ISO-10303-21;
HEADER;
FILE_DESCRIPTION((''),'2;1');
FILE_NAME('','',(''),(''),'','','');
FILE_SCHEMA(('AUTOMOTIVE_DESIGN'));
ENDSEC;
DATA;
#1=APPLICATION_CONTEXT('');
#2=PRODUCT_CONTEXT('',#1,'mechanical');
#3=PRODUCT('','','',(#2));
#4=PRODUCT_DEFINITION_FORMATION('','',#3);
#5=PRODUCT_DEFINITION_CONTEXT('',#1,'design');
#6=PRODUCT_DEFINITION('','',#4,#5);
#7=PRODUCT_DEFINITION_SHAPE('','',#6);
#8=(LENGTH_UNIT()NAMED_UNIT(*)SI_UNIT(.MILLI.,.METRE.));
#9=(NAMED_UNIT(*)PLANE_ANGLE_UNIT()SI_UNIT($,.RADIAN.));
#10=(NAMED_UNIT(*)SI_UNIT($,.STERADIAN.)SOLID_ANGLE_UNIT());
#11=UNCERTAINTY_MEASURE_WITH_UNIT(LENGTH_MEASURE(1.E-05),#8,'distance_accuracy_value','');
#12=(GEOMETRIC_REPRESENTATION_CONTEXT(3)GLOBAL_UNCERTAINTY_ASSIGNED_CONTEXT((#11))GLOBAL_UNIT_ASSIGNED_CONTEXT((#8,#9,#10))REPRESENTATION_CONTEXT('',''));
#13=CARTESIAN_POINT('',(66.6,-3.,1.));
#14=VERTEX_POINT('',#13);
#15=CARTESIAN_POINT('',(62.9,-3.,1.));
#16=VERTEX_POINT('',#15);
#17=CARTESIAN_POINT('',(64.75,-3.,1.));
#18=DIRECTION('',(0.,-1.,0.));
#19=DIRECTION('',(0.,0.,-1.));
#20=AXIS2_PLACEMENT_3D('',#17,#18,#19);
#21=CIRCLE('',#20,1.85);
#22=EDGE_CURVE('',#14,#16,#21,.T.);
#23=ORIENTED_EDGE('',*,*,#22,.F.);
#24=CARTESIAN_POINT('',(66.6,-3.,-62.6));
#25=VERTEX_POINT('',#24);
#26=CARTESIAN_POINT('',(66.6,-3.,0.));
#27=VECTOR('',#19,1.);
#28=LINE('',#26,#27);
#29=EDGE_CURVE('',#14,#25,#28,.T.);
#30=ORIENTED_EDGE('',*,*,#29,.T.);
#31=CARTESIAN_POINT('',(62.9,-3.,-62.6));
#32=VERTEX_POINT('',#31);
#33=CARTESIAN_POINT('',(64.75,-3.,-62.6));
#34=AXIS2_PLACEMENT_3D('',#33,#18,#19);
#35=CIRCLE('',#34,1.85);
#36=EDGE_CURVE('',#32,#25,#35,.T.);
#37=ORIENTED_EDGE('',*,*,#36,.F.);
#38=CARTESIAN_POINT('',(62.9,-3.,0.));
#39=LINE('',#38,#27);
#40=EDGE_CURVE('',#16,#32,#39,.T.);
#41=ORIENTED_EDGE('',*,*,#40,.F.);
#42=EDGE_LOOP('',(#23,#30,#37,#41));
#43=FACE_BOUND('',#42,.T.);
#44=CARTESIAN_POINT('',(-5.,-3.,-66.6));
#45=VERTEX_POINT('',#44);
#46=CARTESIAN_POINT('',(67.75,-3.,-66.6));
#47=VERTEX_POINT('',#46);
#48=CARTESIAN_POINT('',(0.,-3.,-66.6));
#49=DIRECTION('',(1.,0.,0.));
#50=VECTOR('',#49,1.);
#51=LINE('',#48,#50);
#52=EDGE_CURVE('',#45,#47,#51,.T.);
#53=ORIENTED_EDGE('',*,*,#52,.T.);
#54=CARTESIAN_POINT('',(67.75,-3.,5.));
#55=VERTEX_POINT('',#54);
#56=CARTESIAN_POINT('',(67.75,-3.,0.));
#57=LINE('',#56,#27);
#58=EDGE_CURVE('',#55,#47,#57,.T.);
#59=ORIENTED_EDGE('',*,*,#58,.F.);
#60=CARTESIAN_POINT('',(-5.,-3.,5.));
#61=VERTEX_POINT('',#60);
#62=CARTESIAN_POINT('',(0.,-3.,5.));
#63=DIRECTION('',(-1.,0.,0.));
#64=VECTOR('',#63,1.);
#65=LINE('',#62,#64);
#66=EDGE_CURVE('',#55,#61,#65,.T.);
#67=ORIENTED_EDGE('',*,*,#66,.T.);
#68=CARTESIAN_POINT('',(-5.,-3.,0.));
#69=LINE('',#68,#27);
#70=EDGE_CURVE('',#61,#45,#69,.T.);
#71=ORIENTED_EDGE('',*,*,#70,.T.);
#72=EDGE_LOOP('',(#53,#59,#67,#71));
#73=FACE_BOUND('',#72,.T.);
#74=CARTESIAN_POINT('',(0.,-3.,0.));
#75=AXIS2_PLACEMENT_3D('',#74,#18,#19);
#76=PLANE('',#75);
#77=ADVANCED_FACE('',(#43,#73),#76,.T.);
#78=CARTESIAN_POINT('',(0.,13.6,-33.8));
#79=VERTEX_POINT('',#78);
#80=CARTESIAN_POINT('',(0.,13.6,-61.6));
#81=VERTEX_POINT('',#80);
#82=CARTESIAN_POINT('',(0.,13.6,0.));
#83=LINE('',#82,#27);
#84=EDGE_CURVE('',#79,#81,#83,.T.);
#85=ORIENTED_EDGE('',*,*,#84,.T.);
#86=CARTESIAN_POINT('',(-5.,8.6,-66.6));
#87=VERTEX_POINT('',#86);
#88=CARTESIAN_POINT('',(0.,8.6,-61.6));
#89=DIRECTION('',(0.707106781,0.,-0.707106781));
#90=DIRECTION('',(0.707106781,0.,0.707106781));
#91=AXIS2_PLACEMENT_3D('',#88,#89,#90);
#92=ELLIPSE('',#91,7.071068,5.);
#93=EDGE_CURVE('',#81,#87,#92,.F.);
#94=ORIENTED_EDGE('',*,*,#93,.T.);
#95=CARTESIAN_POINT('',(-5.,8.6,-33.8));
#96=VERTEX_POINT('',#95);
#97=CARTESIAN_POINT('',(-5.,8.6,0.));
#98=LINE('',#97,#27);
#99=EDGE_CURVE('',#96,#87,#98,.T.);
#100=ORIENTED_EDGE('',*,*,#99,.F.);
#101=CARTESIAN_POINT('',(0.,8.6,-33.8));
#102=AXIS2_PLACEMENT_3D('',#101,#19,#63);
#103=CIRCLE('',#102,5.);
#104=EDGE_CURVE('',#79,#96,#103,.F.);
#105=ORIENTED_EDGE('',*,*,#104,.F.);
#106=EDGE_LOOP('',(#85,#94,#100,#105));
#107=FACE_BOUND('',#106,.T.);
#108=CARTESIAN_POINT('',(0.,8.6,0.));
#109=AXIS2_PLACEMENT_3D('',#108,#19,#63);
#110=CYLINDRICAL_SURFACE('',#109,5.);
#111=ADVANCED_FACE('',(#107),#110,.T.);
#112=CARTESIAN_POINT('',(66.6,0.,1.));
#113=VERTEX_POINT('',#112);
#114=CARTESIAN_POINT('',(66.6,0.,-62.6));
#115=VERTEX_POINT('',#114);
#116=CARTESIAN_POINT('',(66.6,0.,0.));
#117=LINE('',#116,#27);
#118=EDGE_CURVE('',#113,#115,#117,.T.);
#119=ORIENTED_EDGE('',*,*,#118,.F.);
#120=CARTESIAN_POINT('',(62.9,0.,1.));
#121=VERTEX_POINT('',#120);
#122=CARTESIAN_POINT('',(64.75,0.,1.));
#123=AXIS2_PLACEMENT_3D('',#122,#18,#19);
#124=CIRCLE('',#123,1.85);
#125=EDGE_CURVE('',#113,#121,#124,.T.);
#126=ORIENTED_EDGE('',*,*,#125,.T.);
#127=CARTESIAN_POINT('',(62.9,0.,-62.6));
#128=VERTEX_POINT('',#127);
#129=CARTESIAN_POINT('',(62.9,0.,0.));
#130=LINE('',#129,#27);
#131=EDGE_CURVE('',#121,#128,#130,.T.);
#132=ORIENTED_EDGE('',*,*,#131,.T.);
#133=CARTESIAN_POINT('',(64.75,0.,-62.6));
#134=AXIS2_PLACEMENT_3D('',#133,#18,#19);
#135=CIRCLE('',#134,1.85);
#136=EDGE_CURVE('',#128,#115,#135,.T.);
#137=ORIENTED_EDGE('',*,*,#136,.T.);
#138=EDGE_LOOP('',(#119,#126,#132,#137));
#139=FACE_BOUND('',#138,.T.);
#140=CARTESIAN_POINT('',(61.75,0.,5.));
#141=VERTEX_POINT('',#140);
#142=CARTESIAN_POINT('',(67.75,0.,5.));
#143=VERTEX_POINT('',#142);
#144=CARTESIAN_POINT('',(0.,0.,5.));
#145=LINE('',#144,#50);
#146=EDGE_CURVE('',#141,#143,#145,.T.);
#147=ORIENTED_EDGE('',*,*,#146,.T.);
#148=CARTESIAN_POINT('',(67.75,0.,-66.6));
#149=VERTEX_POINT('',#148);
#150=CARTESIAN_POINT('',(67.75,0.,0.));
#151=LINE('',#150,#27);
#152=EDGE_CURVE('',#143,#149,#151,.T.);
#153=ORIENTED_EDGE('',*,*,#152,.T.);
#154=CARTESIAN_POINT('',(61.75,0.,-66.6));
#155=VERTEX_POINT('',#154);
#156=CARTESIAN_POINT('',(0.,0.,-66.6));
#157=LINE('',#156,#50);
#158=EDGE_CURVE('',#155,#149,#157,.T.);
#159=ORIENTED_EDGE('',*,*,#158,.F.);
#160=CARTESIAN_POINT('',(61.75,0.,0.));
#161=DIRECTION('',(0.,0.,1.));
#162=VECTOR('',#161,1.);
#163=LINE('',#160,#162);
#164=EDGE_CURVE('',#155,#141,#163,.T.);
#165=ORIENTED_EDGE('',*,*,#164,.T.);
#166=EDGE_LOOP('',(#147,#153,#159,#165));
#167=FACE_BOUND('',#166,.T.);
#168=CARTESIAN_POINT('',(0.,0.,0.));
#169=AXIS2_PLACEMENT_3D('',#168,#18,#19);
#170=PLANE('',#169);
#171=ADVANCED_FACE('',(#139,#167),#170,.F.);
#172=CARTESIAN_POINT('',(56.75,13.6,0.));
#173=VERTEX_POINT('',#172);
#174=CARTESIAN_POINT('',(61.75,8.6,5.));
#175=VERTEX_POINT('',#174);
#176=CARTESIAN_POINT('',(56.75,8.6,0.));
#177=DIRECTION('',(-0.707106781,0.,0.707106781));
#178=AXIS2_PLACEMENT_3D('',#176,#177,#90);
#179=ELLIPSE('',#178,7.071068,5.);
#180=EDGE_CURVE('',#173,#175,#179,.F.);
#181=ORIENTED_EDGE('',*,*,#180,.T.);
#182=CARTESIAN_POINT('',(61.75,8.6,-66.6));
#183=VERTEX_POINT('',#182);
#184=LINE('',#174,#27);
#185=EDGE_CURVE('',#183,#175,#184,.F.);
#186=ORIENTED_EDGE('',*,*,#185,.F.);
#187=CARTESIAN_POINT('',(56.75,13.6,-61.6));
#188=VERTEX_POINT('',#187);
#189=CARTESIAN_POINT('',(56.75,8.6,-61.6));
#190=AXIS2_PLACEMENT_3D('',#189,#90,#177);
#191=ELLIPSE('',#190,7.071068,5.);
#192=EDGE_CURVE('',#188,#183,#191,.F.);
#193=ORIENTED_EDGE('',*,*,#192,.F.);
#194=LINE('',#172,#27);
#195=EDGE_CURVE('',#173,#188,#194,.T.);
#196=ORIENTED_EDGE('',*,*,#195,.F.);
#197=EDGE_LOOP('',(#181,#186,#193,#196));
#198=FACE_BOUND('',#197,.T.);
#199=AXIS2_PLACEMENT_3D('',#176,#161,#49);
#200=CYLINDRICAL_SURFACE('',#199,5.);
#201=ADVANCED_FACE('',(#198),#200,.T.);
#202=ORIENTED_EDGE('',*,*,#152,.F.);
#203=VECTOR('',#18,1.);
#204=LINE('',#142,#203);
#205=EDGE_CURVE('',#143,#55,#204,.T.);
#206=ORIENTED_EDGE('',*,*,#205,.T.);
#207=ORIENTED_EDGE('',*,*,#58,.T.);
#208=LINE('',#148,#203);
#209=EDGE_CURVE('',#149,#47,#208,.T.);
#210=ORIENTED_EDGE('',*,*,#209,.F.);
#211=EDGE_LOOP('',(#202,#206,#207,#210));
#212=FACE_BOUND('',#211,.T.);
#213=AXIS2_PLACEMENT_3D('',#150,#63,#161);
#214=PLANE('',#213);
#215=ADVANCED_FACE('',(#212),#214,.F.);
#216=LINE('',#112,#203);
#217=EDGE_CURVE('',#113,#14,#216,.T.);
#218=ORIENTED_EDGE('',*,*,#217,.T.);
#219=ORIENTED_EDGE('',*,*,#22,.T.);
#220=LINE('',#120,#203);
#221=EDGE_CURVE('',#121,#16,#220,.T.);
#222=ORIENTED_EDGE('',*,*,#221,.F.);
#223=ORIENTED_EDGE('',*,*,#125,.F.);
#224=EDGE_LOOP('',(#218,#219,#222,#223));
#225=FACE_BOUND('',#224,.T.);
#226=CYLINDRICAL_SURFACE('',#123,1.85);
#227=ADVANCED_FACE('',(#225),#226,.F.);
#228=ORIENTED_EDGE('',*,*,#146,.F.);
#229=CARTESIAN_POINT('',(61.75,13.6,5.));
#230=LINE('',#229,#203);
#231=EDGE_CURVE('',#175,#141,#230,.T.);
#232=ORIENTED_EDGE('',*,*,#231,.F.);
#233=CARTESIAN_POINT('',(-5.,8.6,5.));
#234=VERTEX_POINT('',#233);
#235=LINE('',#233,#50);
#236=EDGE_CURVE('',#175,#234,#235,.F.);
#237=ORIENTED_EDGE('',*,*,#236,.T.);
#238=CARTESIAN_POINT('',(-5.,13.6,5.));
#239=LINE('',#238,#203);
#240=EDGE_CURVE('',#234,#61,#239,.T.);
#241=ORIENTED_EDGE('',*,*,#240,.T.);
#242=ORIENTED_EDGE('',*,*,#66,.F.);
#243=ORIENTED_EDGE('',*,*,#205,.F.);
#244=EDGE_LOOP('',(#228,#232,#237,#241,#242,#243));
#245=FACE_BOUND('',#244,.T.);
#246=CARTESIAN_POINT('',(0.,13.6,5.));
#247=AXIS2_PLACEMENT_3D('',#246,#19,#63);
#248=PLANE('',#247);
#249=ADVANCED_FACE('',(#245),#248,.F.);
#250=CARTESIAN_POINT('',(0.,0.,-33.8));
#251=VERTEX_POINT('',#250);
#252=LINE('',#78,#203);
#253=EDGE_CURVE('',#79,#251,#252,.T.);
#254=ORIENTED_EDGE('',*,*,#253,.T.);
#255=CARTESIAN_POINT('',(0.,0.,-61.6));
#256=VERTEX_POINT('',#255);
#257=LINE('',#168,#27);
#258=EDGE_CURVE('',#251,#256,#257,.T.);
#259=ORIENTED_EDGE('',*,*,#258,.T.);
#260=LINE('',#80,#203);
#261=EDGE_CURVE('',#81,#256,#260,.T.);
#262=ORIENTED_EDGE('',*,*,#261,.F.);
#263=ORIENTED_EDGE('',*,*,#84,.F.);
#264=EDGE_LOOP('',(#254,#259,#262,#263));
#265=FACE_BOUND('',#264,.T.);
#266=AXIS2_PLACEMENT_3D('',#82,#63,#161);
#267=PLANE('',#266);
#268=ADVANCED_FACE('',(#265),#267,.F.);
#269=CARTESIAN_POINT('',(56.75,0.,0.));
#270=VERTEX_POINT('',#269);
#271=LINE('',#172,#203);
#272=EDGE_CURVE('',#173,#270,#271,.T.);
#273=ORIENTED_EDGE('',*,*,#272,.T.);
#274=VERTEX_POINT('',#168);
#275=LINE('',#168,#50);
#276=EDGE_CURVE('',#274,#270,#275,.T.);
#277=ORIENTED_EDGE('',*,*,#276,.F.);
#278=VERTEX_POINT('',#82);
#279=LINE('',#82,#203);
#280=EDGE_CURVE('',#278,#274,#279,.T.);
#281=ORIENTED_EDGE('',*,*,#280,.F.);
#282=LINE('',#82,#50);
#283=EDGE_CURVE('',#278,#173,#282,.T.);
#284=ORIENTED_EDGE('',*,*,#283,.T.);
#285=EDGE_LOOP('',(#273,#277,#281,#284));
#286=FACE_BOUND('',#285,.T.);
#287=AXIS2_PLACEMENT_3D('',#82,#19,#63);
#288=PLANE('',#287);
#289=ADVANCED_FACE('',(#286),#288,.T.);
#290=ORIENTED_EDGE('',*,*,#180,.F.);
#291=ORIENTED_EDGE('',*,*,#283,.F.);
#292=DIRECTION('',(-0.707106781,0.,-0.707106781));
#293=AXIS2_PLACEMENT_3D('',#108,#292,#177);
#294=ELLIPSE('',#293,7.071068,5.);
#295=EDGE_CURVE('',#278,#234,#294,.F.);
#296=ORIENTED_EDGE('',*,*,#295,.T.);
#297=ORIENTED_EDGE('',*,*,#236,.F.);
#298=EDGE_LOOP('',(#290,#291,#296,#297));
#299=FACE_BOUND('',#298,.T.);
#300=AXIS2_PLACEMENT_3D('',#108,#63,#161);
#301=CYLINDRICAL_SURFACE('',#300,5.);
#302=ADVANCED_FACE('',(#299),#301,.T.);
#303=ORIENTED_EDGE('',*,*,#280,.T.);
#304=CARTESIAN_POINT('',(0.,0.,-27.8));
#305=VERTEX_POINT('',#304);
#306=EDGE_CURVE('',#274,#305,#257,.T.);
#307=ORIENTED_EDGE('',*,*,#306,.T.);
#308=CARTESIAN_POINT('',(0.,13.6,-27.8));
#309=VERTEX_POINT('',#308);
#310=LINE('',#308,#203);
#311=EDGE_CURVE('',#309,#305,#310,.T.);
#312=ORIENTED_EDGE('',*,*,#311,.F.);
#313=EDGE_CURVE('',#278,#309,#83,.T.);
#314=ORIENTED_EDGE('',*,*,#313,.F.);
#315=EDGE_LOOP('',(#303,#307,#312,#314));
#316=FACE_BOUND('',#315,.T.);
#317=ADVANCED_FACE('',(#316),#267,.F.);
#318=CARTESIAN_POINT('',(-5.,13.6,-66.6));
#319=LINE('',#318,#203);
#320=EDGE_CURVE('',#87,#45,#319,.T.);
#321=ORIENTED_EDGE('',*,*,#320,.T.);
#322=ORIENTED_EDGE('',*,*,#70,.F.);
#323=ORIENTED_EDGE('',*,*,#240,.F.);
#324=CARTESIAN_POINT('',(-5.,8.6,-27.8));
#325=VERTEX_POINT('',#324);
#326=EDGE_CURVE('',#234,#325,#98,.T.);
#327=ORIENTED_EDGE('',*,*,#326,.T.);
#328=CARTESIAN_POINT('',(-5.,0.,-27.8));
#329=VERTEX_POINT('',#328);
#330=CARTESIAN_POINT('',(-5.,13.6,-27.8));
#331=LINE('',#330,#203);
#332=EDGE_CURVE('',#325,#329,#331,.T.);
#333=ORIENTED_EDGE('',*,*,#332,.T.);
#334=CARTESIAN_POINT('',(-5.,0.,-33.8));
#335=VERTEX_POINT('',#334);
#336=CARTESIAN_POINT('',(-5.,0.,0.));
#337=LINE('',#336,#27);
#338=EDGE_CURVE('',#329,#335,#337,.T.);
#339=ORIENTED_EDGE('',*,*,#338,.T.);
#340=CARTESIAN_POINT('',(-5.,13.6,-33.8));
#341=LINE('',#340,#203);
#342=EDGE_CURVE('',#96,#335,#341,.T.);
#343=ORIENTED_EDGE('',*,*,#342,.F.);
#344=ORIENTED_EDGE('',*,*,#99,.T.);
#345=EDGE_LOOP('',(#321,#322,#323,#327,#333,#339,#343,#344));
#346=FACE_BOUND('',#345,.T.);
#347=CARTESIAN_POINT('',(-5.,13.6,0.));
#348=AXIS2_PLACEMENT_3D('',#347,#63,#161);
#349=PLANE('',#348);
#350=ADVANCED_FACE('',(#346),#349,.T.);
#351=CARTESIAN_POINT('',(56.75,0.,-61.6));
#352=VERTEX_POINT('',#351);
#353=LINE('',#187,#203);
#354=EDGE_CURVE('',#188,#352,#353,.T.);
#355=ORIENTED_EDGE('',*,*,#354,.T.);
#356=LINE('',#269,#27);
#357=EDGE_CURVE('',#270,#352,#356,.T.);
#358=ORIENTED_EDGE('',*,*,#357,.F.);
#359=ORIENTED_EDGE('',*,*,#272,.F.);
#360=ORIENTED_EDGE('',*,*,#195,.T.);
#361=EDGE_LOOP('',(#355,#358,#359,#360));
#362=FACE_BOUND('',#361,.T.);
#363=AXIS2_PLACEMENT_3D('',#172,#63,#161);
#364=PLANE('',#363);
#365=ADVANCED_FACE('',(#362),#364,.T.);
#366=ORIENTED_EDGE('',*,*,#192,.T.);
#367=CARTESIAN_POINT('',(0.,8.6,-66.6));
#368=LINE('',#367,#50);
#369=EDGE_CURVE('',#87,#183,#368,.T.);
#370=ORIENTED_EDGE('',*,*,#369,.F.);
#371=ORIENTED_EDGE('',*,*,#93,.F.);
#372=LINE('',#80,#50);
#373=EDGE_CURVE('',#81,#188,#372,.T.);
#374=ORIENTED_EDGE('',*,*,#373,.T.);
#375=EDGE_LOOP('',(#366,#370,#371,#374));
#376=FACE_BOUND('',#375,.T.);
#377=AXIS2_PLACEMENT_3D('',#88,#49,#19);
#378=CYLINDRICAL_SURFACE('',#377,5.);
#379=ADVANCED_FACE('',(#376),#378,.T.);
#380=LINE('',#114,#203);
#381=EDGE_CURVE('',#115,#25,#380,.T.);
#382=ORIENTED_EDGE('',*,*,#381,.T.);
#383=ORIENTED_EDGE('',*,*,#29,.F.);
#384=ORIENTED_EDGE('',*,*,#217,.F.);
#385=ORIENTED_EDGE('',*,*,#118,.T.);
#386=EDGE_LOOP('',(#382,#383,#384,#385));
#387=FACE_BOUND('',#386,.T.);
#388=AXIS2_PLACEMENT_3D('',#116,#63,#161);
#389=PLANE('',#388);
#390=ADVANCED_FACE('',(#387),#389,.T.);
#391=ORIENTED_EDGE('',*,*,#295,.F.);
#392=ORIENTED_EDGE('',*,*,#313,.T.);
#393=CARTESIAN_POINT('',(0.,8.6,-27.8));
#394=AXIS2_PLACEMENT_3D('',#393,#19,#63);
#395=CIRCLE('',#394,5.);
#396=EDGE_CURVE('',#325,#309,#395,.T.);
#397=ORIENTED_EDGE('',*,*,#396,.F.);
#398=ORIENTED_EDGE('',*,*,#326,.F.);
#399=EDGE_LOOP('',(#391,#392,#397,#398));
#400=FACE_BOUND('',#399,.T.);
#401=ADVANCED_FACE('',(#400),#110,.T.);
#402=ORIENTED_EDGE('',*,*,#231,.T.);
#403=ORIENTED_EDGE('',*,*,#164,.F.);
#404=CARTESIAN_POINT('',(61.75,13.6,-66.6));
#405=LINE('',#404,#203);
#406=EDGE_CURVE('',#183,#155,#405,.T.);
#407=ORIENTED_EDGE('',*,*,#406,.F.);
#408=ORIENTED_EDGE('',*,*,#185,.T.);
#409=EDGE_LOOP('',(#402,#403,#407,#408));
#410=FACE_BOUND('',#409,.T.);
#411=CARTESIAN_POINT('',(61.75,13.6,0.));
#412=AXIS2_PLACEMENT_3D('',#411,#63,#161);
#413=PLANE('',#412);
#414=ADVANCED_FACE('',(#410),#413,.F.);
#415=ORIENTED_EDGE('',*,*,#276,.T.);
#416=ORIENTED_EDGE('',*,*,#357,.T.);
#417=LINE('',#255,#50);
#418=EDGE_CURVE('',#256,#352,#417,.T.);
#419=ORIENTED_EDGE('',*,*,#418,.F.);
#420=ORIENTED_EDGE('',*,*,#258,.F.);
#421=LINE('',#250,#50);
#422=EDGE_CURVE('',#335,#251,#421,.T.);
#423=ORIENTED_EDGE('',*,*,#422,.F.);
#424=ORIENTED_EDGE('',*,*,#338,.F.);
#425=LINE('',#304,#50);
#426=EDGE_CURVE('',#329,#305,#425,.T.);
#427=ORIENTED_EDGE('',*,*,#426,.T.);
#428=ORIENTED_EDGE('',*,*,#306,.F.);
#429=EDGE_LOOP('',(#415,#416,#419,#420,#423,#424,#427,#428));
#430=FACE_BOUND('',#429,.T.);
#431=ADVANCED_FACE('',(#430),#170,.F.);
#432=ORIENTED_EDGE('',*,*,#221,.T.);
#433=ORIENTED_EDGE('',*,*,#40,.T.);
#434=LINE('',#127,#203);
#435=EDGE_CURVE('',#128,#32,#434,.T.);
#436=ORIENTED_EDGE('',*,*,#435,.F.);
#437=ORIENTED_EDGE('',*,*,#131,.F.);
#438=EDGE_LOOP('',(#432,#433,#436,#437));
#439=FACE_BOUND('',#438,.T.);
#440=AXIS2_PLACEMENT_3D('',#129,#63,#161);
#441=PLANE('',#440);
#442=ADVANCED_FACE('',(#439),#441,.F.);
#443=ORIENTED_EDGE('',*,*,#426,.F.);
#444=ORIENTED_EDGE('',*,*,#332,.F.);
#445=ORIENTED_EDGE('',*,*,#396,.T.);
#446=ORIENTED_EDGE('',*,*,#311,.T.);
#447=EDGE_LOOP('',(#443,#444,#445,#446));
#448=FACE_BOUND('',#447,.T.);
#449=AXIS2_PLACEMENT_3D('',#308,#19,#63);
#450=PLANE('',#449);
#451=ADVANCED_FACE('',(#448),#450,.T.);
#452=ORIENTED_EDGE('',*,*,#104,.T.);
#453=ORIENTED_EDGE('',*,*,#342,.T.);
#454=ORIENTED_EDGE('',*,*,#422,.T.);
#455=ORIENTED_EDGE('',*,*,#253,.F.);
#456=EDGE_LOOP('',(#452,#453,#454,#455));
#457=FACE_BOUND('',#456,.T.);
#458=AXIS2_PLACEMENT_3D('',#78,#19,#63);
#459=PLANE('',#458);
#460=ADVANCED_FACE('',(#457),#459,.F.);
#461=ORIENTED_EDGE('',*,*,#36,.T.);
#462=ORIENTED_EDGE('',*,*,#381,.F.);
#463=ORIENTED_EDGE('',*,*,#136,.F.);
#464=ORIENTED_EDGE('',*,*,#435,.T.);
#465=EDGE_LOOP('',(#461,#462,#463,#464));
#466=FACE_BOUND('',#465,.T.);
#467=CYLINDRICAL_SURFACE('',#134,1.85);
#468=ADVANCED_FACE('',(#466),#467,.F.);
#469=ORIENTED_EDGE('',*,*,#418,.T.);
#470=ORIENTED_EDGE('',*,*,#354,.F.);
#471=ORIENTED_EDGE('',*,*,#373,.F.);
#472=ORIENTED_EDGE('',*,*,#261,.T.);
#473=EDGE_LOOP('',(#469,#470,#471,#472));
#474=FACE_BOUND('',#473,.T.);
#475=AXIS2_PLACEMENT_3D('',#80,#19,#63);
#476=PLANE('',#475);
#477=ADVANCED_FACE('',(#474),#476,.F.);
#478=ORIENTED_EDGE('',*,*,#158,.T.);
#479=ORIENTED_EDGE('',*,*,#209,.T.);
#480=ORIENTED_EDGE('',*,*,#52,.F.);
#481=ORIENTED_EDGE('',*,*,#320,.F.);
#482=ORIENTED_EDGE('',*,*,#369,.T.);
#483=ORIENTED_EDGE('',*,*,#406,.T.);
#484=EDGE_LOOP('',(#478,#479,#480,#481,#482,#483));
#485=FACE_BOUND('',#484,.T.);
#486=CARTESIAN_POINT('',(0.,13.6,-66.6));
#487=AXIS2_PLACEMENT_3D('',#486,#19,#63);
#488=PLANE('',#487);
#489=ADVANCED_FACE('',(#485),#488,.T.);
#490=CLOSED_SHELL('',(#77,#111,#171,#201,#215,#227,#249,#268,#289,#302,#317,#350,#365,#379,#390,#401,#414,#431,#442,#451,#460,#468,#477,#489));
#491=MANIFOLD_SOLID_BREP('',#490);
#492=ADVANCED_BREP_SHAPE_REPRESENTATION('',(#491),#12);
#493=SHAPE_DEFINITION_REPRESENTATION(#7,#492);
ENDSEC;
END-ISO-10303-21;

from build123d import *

# Parameters (mm, degrees)
BOSS_EXTRUDE1_DEPTH = 13.6
BOSS_EXTRUDE2_DEPTH = 3
FILLET1_START       = -66.6
FILLET1_DEPTH       = 71.6
FILLET1_START_2     = -6
FILLET1_2_DEPTH     = 69
SKETCH3_W           = 6
SKETCH3_H           = 71.6
BOSS_EXTRUDE4_DEPTH = 3


with BuildPart() as part:
    # Sketch1 → Boss-Extrude1 (new body)
    with BuildSketch(Plane(origin=(0, 0, 0), x_dir=(1, 0, 0), z_dir=(0, 1, 0))):
        Polygon((56.75, 30.8), (61.75, 30.8), (61.75, 66.6), (-5, 66.6), (-5, 33.8), (0, 33.8), (0, 61.6), (56.75, 61.6), align=None)
        Polygon((-5, 27.8), (-5, -5), (61.75, -5), (61.75, 30.8), (56.75, 30.8), (56.75, 0), (0, 0), (0, 27.8), align=None)
    extrude(amount=BOSS_EXTRUDE1_DEPTH)

    # Sketch2 → Boss-Extrude2 (add)
    with BuildSketch(Plane.XZ):
        Polygon((0, 0), (56.75, 0), (56.75, -61.6), (0, -61.6), (0, -33.8), (-5, -33.8), (-5, -66.6), (61.75, -66.6), (61.75, 5), (-5, 5), (-5, -27.8), (0, -27.8), align=None)
        Polygon((-5, -27.8), (-5, -33.8), (0, -33.8), (0, -61.6), (56.75, -61.6), (56.75, 0), (0, 0), (0, -27.8), align=None)
    extrude(amount=BOSS_EXTRUDE2_DEPTH)

    # Fillet1: read off the stored shape, not the designer's step
    # Fillet1 outline → Fillet1 (cut)
    with BuildSketch(Plane.XY.offset(FILLET1_START)):
        with BuildLine():
            Line((-5, 13.6), (-5, 8.6))
            ThreePointArc((-5, 8.6), (-3.535533906, 12.135533906), (0, 13.6))
            Line((0, 13.6), (-5, 13.6))
        make_face()
        with BuildLine():
            Line((61.75, 13.6), (56.75, 13.6))
            ThreePointArc((56.75, 13.6), (60.285533906, 12.135533906), (61.75, 8.6))
            Line((61.75, 8.6), (61.75, 13.6))
        make_face()
    extrude(amount=FILLET1_DEPTH, mode=Mode.SUBTRACT)

    # Fillet1 2 outline → Fillet1 2 (cut)
    with BuildSketch(Plane.YZ.offset(FILLET1_START_2)):
        with BuildLine():
            Line((13.6, 5), (8.6, 5))
            ThreePointArc((8.6, 5), (12.135533906, 3.535533906), (13.6, 0))
            Line((13.6, 0), (13.6, 5))
        make_face()
        with BuildLine():
            ThreePointArc((13.6, -61.6), (12.135533906, -65.135533906), (8.6, -66.6))
            Line((8.6, -66.6), (13.6, -66.6))
            Line((13.6, -66.6), (13.6, -61.6))
        make_face()
    extrude(amount=FILLET1_2_DEPTH, mode=Mode.SUBTRACT)

    # Sketch3 → Boss-Extrude4 (add)
    with BuildSketch(Plane.XZ.offset(3)):
        with Locations((64.75, -30.8)):
            Rectangle(SKETCH3_W, SKETCH3_H)
        with BuildLine():
            ThreePointArc((62.9, -62.6), (64.75, -64.45), (66.6, -62.6))
            Line((66.6, -62.6), (66.6, 1))
            ThreePointArc((66.6, 1), (64.75, 2.85), (62.9, 1))
            Line((62.9, 1), (62.9, -62.6))
        make_face(mode=Mode.SUBTRACT)
    extrude(amount=-BOSS_EXTRUDE4_DEPTH)


solid = part.part
